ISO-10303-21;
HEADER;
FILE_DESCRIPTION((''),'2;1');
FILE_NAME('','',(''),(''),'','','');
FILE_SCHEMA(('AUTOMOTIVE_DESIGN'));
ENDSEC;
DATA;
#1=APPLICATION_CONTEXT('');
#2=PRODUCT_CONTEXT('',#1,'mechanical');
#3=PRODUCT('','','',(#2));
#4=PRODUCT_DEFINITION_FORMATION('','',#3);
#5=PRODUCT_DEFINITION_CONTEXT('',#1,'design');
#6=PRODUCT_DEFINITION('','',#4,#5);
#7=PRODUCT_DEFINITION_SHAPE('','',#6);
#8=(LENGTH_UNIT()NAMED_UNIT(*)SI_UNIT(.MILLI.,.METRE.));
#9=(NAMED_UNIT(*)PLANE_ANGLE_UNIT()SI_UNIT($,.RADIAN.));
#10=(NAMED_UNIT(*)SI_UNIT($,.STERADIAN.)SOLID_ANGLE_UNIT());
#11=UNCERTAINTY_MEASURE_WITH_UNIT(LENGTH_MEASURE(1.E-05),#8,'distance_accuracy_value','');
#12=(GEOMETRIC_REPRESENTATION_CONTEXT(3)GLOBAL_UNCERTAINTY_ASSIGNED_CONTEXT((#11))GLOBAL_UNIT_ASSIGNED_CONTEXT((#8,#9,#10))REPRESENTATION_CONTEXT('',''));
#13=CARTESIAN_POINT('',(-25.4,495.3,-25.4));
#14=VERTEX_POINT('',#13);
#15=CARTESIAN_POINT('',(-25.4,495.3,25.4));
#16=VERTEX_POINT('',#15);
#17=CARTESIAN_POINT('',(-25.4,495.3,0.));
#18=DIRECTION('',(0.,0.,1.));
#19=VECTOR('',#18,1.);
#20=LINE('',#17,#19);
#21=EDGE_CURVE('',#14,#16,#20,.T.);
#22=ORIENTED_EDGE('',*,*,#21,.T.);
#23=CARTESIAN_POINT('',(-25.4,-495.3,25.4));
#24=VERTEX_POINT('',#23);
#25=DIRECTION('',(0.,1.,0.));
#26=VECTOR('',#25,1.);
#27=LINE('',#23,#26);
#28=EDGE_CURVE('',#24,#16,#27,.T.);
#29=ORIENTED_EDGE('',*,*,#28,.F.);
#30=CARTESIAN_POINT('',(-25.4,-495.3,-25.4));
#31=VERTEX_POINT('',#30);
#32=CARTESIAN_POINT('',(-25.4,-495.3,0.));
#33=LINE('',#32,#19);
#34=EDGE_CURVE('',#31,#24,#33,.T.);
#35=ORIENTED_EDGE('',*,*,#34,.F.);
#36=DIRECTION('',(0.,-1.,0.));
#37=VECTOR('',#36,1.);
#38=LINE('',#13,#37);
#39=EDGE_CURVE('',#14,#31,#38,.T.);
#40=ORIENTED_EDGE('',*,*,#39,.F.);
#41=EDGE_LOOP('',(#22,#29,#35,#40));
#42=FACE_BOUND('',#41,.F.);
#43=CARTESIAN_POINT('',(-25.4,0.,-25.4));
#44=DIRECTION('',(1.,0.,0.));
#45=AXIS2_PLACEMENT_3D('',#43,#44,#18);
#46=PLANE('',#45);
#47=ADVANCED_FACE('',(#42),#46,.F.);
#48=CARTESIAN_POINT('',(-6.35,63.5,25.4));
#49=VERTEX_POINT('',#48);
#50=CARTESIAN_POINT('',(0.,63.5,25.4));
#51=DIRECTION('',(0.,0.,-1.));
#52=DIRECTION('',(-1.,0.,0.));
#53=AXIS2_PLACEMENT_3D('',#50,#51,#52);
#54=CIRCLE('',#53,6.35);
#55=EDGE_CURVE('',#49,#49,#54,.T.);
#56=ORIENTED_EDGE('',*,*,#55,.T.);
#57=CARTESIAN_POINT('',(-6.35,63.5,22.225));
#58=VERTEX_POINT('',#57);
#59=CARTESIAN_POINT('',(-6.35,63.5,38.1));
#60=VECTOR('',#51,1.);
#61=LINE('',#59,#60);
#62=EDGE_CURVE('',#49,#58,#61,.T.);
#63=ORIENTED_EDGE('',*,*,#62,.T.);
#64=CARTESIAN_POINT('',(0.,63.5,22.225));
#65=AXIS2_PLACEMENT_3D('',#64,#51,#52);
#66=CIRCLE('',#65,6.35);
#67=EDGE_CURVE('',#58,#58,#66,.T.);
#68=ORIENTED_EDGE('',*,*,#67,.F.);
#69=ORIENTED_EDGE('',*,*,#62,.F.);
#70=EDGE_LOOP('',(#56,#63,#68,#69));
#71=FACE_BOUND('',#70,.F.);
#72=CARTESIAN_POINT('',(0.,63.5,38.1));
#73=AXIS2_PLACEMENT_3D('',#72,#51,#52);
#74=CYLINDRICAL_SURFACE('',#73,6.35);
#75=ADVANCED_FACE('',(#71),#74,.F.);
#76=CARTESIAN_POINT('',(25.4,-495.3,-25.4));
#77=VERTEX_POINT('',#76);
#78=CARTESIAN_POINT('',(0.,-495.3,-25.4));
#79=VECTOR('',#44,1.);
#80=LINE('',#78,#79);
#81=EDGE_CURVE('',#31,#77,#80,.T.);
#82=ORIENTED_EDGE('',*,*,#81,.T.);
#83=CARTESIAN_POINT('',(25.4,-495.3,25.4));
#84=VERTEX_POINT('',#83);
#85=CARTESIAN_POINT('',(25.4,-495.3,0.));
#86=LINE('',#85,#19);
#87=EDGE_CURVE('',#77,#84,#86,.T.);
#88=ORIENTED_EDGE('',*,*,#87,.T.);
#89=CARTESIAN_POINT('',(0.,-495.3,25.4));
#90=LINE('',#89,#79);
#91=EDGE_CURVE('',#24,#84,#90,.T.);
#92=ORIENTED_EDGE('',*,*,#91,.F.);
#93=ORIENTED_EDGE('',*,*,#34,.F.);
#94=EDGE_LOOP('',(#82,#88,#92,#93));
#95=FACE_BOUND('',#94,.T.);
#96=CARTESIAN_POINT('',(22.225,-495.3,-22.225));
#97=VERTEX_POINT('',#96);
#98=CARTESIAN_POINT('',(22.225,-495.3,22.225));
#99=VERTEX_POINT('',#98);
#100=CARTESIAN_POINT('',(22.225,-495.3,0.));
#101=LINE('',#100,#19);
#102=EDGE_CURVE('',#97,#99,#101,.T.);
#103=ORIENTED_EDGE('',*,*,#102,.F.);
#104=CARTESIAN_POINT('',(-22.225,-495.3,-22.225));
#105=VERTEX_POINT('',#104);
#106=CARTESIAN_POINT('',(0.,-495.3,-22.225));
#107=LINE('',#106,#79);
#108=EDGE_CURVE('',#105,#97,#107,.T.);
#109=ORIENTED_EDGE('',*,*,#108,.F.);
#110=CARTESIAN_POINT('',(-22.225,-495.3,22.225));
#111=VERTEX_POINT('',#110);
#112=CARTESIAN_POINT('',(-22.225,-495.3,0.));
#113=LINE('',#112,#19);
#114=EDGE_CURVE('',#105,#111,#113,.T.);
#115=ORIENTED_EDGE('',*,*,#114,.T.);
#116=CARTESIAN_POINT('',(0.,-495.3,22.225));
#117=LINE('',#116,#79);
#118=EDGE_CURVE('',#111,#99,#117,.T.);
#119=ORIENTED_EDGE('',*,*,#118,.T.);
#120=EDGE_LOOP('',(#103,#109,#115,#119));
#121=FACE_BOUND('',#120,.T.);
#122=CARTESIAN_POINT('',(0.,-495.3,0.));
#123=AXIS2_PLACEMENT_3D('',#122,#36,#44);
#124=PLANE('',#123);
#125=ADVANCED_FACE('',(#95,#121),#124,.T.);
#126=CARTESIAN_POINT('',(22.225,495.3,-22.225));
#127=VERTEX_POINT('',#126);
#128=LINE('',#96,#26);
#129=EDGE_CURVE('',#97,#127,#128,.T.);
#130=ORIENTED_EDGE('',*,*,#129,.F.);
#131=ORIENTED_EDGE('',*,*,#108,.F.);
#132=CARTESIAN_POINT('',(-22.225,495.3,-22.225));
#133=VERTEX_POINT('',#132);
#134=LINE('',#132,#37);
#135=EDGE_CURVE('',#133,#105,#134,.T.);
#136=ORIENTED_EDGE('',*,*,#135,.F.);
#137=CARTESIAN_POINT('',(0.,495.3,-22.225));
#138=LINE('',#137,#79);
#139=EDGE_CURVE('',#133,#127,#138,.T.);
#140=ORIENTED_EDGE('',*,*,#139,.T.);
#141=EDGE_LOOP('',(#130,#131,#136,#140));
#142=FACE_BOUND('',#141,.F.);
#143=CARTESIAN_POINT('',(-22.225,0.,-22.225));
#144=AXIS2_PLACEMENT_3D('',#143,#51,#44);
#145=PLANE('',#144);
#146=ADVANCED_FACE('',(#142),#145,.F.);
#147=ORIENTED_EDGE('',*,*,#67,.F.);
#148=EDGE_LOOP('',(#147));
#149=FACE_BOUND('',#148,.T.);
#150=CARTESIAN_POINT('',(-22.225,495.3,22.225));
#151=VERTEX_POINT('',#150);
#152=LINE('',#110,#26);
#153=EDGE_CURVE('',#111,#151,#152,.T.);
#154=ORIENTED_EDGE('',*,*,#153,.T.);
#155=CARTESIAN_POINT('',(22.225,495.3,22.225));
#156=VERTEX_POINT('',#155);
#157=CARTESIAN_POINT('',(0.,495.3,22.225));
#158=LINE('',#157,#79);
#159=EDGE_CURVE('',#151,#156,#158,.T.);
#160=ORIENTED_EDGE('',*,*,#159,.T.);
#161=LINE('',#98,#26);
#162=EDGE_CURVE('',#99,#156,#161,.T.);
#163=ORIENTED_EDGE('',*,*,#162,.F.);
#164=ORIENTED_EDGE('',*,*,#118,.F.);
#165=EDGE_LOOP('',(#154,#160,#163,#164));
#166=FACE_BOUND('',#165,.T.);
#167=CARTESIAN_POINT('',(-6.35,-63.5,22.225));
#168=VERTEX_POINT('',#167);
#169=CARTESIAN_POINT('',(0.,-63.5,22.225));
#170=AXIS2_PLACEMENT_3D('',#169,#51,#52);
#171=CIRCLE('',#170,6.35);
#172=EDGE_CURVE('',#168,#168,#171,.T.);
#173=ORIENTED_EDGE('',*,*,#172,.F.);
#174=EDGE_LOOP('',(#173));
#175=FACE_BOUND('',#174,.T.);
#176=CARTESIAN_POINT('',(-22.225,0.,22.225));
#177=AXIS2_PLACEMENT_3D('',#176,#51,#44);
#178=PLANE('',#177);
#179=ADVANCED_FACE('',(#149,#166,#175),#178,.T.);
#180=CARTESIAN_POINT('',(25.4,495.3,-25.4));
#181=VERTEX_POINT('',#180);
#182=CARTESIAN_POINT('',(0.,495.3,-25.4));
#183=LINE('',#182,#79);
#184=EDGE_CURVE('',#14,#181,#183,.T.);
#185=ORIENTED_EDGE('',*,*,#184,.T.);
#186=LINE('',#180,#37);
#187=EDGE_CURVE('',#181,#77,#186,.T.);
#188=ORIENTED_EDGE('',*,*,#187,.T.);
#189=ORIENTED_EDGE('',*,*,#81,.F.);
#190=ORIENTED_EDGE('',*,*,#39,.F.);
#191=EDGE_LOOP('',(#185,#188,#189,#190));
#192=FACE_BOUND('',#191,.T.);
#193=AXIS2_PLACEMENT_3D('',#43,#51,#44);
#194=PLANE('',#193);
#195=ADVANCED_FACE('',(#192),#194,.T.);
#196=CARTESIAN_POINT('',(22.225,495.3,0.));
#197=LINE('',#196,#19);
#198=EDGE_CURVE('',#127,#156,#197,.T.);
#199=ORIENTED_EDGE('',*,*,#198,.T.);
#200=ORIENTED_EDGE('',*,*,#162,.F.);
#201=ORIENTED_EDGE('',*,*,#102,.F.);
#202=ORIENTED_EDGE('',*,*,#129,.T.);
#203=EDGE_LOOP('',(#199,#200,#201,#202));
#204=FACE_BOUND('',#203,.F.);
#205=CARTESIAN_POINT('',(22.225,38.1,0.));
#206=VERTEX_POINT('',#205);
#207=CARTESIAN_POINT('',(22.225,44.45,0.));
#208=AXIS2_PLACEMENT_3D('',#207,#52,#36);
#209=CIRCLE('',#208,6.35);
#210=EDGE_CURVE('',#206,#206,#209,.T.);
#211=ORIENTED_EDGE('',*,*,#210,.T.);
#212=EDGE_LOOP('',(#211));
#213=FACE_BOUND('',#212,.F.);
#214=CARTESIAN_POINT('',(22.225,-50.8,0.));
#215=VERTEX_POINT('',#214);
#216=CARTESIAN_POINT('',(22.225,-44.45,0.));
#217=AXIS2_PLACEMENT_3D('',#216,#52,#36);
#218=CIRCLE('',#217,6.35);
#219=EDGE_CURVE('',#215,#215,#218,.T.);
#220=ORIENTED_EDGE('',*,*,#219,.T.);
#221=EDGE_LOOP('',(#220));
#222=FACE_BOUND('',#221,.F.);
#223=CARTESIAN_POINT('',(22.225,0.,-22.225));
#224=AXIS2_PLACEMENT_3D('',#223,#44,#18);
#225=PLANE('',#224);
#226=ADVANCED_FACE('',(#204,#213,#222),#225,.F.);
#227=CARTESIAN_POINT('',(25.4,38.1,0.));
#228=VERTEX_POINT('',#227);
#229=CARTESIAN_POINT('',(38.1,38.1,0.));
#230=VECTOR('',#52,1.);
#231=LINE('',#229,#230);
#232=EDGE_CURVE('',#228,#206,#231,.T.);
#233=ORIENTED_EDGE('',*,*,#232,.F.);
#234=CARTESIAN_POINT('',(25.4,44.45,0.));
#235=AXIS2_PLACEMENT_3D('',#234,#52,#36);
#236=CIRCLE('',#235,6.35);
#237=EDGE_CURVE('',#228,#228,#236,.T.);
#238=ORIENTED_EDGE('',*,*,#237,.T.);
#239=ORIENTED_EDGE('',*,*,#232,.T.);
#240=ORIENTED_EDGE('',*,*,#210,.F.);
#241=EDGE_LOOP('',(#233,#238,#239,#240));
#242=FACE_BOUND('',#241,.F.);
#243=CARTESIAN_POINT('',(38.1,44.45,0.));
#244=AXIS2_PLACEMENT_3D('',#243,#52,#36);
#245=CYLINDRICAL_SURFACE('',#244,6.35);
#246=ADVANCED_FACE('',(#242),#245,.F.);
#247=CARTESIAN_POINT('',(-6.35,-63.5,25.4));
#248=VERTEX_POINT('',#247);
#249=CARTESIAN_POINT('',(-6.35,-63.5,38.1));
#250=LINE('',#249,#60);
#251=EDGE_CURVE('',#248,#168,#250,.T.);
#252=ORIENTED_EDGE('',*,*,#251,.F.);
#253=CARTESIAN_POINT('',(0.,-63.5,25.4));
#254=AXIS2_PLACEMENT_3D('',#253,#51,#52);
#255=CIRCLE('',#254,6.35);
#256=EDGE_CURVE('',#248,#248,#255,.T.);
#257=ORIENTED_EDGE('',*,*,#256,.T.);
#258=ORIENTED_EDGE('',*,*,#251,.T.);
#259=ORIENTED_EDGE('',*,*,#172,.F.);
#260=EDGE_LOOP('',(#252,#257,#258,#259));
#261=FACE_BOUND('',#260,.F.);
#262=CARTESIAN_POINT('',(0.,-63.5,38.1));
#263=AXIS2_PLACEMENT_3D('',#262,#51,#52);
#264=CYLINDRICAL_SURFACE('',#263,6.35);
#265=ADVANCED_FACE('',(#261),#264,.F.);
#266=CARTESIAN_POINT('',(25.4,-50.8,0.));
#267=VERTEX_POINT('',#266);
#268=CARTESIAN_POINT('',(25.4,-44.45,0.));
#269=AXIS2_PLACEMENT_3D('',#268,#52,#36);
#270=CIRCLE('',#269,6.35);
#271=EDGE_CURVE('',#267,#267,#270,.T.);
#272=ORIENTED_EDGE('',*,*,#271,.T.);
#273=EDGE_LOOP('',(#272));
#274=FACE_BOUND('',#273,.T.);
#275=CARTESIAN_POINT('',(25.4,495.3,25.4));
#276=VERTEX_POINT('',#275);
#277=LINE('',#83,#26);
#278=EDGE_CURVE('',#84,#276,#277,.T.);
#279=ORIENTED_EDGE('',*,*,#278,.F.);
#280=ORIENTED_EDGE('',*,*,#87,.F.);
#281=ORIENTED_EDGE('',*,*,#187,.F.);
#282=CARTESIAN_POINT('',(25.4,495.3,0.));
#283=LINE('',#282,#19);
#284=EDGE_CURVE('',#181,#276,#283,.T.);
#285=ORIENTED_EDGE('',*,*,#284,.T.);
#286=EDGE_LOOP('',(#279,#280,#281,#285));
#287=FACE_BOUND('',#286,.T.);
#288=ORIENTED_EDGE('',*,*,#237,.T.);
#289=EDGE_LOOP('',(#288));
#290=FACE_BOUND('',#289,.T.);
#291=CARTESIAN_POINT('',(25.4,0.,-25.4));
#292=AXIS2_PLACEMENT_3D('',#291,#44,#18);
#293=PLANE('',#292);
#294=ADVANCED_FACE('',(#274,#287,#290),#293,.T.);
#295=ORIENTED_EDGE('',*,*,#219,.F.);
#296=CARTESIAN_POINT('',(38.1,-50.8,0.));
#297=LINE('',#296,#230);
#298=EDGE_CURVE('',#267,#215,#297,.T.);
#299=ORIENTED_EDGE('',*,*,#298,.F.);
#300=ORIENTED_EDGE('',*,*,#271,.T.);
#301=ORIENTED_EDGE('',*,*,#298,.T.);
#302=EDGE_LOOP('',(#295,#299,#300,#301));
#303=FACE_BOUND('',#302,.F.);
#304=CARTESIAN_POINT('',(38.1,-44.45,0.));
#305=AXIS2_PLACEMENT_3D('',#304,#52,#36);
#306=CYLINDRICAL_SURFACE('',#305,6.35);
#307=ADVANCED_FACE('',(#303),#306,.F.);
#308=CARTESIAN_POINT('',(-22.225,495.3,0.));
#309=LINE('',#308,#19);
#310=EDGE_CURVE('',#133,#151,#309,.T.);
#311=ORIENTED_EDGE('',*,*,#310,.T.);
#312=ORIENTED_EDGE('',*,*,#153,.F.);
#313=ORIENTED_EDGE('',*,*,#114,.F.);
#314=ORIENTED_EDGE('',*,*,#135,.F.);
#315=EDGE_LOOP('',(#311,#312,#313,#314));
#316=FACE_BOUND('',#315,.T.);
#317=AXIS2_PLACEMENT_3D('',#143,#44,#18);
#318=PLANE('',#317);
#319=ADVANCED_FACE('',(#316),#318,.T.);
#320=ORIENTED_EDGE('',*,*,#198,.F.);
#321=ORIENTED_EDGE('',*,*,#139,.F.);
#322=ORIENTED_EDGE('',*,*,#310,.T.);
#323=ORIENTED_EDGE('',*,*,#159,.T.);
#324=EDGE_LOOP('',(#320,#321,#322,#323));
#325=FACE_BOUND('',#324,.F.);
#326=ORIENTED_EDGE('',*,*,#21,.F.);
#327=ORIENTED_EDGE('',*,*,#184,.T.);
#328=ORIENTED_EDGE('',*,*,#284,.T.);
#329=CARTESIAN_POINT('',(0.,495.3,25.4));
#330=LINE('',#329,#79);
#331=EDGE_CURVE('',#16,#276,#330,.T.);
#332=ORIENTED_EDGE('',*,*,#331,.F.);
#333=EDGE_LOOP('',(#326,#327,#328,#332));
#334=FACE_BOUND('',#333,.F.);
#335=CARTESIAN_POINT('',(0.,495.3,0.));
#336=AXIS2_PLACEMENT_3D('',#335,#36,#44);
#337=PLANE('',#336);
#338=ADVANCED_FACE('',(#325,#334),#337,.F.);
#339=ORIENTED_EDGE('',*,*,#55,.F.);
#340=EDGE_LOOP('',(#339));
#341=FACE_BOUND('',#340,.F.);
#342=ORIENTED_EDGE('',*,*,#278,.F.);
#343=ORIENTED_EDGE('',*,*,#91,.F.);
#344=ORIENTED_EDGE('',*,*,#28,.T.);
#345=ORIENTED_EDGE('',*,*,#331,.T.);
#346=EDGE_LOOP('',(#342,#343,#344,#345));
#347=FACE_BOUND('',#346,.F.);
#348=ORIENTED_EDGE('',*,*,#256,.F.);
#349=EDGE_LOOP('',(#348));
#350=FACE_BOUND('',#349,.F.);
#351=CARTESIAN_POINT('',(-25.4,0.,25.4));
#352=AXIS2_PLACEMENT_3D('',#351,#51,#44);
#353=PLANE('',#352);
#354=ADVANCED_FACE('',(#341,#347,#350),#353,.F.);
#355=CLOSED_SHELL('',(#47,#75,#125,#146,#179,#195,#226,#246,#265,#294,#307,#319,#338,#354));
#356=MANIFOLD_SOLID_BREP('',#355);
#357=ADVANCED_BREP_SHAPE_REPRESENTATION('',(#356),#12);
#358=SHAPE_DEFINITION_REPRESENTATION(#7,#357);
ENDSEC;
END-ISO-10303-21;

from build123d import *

# Parameters (mm, degrees)
F0_W     = 50.8
F0_H     = 50.8
F0_W_2   = 44.45
F0_H_2   = 44.45
F1_DEPTH = 495.3
F3_D     = 12.7
F3_DEPTH = 12.7
F3_TIP   = 3.8154649308
F5_D     = 12.7
F5_DEPTH = 12.7
F5_TIP   = 3.8154649308


# Not quite as in the source:
# - a length typed as a fraction of an inch, garbled in the dataset ("3 / 203.2 mm" for 3/8 in), is restored


with BuildPart() as f1:
    # F0 (on Front) → F1 (new body, symmetric)
    with BuildSketch(Plane.XZ):
        Rectangle(F0_W, F0_H)
        Rectangle(F0_W_2, F0_H_2, mode=Mode.SUBTRACT)
    extrude(amount=F1_DEPTH, both=True)

    # F3
    with Locations(Plane.XY.offset(25.4)):
        with Locations((0, 63.5), (0, -63.5)):
            Hole(F3_D / 2, depth=F3_DEPTH)
            with Locations((0, 0, -(F3_DEPTH + F3_TIP / 2))):  # 118° drill point
                Cone(0, F3_D / 2, F3_TIP, mode=Mode.SUBTRACT)

    # F5
    with Locations(Plane.YZ.offset(25.4)):
        with Locations((44.45, 0), (-44.45, 0)):
            Hole(F5_D / 2, depth=F5_DEPTH)
            with Locations((0, 0, -(F5_DEPTH + F5_TIP / 2))):  # 118° drill point
                Cone(0, F5_D / 2, F5_TIP, mode=Mode.SUBTRACT)


solid = f1.part
